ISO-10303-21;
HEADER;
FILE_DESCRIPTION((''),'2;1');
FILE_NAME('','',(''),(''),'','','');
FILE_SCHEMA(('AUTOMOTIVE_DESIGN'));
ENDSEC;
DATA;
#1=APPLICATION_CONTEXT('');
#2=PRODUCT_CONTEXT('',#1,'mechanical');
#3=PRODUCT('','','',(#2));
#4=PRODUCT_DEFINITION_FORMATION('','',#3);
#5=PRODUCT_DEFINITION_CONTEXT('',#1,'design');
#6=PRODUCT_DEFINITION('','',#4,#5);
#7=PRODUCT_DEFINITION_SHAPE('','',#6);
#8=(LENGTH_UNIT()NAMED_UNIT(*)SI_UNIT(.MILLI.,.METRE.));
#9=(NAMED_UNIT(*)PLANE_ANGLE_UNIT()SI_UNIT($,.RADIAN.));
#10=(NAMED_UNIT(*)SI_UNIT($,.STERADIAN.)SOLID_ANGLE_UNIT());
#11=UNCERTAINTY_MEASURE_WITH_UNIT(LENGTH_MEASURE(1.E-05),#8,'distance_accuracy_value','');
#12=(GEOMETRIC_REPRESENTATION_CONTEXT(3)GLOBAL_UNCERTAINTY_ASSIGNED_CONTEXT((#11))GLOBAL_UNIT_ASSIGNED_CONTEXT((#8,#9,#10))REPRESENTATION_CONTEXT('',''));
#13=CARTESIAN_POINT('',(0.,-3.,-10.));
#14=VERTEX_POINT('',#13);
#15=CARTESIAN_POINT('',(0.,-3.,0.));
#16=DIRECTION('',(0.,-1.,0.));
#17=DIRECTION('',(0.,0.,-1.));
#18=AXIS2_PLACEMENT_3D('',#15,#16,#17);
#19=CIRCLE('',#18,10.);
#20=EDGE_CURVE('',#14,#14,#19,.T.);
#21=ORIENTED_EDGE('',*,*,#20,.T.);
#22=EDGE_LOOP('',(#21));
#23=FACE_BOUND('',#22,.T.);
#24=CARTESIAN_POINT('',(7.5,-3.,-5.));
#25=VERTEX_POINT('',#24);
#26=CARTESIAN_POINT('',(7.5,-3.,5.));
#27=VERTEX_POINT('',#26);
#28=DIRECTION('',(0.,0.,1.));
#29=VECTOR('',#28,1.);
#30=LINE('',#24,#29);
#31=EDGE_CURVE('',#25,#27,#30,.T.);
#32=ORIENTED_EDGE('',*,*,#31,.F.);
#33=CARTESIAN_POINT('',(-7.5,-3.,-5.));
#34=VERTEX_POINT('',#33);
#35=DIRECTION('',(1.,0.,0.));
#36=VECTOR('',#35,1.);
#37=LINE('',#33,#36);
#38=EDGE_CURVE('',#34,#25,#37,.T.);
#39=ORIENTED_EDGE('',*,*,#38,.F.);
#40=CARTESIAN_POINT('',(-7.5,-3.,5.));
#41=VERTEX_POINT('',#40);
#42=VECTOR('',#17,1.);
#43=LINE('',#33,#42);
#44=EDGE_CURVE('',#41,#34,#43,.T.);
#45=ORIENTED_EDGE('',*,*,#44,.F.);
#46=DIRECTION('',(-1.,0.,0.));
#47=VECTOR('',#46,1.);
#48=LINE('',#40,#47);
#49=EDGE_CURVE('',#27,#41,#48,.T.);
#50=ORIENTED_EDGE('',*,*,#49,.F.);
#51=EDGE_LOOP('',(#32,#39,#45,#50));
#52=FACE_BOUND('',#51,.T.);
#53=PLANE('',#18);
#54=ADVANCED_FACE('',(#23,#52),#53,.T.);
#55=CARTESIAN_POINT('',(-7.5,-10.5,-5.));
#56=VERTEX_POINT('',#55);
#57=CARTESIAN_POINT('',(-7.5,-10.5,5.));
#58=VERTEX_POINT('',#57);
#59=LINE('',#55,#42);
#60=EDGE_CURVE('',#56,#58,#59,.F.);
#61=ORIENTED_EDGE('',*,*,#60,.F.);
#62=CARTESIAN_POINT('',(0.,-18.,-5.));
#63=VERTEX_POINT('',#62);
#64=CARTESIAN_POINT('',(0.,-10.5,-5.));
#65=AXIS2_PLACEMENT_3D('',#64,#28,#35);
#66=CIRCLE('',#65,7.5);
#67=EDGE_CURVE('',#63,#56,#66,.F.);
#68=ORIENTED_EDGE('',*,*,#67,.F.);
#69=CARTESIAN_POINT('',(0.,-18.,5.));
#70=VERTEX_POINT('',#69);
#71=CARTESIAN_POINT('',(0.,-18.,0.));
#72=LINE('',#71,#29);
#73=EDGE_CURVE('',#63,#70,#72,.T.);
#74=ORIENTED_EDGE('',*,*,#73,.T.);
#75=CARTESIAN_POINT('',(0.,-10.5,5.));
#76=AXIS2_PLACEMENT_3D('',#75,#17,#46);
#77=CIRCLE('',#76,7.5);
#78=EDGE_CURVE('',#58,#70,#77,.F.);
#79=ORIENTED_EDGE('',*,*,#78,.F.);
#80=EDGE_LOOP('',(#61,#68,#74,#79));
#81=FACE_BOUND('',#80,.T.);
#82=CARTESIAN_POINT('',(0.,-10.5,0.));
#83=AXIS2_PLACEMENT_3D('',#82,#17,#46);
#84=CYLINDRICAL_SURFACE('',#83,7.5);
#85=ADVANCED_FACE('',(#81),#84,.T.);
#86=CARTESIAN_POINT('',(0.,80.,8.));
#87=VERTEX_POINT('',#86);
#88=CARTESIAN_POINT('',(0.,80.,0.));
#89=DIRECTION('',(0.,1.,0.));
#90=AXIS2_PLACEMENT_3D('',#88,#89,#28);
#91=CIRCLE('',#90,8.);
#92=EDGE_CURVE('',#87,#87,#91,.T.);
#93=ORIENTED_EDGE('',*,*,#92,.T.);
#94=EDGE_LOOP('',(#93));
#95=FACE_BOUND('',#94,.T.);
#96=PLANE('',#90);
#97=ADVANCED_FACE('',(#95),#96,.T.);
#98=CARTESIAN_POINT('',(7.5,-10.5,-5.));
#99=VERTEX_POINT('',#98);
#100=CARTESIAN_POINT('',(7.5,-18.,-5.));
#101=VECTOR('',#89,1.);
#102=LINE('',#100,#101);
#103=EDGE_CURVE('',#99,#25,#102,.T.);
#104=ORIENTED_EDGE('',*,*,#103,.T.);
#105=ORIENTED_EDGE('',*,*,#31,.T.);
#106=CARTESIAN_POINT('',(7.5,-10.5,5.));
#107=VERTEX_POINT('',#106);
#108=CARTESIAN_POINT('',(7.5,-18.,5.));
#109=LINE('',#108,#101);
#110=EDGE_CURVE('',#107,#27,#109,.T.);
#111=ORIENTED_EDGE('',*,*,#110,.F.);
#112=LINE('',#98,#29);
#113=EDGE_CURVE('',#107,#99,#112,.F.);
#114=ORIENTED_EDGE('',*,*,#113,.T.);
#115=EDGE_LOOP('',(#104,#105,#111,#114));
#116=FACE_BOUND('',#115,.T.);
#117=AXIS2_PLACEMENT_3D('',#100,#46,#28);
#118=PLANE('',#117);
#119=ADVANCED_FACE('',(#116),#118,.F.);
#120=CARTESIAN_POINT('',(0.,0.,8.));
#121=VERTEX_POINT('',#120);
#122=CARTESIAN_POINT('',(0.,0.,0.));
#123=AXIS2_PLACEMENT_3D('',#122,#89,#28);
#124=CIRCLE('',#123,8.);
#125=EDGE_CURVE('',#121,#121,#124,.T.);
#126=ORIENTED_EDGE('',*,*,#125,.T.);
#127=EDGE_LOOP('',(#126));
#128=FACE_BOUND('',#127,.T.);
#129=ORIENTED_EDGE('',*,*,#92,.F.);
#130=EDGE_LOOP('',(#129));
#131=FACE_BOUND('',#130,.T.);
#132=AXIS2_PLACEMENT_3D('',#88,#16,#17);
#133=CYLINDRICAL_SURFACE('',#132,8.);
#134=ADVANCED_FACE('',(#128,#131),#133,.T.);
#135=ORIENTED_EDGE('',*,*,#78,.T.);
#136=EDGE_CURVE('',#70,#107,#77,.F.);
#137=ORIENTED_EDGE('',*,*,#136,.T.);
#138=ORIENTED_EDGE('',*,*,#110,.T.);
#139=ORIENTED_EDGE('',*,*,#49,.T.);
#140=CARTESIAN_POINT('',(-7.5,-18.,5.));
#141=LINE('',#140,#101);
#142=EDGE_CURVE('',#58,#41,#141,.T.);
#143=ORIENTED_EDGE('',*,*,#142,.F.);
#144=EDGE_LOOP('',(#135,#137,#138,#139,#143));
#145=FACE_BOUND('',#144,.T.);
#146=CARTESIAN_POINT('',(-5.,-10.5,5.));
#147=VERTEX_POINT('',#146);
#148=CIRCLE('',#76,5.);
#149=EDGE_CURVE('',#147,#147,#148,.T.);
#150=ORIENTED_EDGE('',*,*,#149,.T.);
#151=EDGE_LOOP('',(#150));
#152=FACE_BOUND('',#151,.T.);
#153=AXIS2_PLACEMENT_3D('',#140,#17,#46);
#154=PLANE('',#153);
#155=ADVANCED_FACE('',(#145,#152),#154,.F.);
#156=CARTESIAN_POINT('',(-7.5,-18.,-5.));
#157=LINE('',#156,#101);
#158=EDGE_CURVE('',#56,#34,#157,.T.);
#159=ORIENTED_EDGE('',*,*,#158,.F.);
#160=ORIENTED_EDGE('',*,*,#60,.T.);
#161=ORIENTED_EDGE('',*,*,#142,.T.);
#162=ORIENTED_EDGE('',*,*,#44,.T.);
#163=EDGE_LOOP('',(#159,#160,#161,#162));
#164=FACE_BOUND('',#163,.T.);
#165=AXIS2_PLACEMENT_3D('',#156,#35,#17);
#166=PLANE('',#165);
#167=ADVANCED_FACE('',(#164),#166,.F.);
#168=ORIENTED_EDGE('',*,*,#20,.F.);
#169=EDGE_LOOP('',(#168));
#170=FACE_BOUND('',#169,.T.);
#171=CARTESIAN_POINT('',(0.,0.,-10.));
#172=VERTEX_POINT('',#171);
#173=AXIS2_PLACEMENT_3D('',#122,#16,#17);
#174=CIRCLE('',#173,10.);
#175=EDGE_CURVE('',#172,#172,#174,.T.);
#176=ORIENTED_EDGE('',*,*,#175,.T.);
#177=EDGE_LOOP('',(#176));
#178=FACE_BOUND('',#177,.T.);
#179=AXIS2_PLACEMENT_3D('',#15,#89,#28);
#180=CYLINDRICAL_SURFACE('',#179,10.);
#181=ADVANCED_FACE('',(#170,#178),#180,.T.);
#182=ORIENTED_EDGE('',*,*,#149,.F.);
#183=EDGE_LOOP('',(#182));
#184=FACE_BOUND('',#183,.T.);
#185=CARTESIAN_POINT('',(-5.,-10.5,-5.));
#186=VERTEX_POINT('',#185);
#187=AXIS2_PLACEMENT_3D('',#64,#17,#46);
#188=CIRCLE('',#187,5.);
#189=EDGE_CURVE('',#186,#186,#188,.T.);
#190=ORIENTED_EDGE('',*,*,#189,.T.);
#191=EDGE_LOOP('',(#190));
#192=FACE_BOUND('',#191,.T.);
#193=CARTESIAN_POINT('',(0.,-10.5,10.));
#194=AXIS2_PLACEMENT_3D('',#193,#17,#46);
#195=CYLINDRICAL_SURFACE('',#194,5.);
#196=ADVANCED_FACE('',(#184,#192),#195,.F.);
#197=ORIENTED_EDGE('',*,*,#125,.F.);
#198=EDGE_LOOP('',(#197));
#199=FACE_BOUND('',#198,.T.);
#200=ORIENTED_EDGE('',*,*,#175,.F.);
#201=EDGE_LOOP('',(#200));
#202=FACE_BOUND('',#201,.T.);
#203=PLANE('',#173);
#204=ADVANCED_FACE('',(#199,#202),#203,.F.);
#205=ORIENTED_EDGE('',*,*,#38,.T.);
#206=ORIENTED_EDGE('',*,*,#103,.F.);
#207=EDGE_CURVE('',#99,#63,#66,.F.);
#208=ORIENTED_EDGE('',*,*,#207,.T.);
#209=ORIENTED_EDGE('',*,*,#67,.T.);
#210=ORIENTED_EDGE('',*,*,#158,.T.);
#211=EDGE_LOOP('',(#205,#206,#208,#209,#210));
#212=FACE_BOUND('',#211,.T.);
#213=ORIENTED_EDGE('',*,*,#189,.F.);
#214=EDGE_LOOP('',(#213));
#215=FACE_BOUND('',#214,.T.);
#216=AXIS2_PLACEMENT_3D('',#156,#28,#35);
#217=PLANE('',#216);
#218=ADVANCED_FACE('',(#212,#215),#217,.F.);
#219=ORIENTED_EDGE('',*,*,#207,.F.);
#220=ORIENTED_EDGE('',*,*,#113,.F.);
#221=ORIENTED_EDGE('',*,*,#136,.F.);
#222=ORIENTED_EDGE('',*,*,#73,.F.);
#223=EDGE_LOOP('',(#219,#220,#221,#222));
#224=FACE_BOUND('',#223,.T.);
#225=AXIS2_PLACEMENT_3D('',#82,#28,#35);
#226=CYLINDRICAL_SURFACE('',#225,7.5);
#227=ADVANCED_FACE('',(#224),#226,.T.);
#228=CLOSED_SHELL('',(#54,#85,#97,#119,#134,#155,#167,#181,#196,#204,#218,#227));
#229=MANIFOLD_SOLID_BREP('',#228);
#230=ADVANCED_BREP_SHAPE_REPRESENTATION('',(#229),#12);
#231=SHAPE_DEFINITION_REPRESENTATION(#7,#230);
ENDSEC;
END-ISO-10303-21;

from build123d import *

# Parameters (mm, degrees)
SKETCH1_R           = 8
BOSS_EXTRUDE1_DEPTH = 80
SKETCH2_R           = 10
BOSS_EXTRUDE2_DEPTH = 3
SKETCH3_W           = 15
SKETCH3_H           = 10
BOSS_EXTRUDE3_DEPTH = 15
SKETCH4_R           = 5
CUT_EXTRUDE1_DEPTH  = 15
FILLET1_R           = 7.5


with BuildPart() as part:
    # Sketch1 → Boss-Extrude1 (new body)
    with BuildSketch(Plane(origin=(0, 0, 0), x_dir=(1, 0, 0), z_dir=(0, 1, 0))):
        with Locations(Location((0, 0, 0), (0, 0, 270))):
            Circle(SKETCH1_R)
    extrude(amount=BOSS_EXTRUDE1_DEPTH)

    # Sketch2 → Boss-Extrude2 (add)
    with BuildSketch(Plane.XZ):
        with Locations(Location((0, 0, 0), (0, 0, 270))):
            Circle(SKETCH2_R)
    extrude(amount=BOSS_EXTRUDE2_DEPTH)

    # Sketch3 → Boss-Extrude3 (add)
    with BuildSketch(Plane.XZ.offset(3)):
        Rectangle(SKETCH3_W, SKETCH3_H)
    extrude(amount=BOSS_EXTRUDE3_DEPTH)

    # Sketch4 → Cut-Extrude1 (cut)
    with BuildSketch(Plane(origin=(0, 0, -5), x_dir=(-1, 0, 0), z_dir=(0, 0, -1))):
        with Locations((0, -10.5)):
            Circle(SKETCH4_R)
    extrude(amount=-CUT_EXTRUDE1_DEPTH, mode=Mode.SUBTRACT)

    # Fillet1
    fillet1_edges = [part.edges().sort_by_distance(p)[0] for p in [
        (-7.5, -18, 0),
        (7.5, -18, 0),
    ]]
    fillet(fillet1_edges, radius=FILLET1_R - 0.0001)  # a hair under: the kernel refuses the full size


solid = part.part
